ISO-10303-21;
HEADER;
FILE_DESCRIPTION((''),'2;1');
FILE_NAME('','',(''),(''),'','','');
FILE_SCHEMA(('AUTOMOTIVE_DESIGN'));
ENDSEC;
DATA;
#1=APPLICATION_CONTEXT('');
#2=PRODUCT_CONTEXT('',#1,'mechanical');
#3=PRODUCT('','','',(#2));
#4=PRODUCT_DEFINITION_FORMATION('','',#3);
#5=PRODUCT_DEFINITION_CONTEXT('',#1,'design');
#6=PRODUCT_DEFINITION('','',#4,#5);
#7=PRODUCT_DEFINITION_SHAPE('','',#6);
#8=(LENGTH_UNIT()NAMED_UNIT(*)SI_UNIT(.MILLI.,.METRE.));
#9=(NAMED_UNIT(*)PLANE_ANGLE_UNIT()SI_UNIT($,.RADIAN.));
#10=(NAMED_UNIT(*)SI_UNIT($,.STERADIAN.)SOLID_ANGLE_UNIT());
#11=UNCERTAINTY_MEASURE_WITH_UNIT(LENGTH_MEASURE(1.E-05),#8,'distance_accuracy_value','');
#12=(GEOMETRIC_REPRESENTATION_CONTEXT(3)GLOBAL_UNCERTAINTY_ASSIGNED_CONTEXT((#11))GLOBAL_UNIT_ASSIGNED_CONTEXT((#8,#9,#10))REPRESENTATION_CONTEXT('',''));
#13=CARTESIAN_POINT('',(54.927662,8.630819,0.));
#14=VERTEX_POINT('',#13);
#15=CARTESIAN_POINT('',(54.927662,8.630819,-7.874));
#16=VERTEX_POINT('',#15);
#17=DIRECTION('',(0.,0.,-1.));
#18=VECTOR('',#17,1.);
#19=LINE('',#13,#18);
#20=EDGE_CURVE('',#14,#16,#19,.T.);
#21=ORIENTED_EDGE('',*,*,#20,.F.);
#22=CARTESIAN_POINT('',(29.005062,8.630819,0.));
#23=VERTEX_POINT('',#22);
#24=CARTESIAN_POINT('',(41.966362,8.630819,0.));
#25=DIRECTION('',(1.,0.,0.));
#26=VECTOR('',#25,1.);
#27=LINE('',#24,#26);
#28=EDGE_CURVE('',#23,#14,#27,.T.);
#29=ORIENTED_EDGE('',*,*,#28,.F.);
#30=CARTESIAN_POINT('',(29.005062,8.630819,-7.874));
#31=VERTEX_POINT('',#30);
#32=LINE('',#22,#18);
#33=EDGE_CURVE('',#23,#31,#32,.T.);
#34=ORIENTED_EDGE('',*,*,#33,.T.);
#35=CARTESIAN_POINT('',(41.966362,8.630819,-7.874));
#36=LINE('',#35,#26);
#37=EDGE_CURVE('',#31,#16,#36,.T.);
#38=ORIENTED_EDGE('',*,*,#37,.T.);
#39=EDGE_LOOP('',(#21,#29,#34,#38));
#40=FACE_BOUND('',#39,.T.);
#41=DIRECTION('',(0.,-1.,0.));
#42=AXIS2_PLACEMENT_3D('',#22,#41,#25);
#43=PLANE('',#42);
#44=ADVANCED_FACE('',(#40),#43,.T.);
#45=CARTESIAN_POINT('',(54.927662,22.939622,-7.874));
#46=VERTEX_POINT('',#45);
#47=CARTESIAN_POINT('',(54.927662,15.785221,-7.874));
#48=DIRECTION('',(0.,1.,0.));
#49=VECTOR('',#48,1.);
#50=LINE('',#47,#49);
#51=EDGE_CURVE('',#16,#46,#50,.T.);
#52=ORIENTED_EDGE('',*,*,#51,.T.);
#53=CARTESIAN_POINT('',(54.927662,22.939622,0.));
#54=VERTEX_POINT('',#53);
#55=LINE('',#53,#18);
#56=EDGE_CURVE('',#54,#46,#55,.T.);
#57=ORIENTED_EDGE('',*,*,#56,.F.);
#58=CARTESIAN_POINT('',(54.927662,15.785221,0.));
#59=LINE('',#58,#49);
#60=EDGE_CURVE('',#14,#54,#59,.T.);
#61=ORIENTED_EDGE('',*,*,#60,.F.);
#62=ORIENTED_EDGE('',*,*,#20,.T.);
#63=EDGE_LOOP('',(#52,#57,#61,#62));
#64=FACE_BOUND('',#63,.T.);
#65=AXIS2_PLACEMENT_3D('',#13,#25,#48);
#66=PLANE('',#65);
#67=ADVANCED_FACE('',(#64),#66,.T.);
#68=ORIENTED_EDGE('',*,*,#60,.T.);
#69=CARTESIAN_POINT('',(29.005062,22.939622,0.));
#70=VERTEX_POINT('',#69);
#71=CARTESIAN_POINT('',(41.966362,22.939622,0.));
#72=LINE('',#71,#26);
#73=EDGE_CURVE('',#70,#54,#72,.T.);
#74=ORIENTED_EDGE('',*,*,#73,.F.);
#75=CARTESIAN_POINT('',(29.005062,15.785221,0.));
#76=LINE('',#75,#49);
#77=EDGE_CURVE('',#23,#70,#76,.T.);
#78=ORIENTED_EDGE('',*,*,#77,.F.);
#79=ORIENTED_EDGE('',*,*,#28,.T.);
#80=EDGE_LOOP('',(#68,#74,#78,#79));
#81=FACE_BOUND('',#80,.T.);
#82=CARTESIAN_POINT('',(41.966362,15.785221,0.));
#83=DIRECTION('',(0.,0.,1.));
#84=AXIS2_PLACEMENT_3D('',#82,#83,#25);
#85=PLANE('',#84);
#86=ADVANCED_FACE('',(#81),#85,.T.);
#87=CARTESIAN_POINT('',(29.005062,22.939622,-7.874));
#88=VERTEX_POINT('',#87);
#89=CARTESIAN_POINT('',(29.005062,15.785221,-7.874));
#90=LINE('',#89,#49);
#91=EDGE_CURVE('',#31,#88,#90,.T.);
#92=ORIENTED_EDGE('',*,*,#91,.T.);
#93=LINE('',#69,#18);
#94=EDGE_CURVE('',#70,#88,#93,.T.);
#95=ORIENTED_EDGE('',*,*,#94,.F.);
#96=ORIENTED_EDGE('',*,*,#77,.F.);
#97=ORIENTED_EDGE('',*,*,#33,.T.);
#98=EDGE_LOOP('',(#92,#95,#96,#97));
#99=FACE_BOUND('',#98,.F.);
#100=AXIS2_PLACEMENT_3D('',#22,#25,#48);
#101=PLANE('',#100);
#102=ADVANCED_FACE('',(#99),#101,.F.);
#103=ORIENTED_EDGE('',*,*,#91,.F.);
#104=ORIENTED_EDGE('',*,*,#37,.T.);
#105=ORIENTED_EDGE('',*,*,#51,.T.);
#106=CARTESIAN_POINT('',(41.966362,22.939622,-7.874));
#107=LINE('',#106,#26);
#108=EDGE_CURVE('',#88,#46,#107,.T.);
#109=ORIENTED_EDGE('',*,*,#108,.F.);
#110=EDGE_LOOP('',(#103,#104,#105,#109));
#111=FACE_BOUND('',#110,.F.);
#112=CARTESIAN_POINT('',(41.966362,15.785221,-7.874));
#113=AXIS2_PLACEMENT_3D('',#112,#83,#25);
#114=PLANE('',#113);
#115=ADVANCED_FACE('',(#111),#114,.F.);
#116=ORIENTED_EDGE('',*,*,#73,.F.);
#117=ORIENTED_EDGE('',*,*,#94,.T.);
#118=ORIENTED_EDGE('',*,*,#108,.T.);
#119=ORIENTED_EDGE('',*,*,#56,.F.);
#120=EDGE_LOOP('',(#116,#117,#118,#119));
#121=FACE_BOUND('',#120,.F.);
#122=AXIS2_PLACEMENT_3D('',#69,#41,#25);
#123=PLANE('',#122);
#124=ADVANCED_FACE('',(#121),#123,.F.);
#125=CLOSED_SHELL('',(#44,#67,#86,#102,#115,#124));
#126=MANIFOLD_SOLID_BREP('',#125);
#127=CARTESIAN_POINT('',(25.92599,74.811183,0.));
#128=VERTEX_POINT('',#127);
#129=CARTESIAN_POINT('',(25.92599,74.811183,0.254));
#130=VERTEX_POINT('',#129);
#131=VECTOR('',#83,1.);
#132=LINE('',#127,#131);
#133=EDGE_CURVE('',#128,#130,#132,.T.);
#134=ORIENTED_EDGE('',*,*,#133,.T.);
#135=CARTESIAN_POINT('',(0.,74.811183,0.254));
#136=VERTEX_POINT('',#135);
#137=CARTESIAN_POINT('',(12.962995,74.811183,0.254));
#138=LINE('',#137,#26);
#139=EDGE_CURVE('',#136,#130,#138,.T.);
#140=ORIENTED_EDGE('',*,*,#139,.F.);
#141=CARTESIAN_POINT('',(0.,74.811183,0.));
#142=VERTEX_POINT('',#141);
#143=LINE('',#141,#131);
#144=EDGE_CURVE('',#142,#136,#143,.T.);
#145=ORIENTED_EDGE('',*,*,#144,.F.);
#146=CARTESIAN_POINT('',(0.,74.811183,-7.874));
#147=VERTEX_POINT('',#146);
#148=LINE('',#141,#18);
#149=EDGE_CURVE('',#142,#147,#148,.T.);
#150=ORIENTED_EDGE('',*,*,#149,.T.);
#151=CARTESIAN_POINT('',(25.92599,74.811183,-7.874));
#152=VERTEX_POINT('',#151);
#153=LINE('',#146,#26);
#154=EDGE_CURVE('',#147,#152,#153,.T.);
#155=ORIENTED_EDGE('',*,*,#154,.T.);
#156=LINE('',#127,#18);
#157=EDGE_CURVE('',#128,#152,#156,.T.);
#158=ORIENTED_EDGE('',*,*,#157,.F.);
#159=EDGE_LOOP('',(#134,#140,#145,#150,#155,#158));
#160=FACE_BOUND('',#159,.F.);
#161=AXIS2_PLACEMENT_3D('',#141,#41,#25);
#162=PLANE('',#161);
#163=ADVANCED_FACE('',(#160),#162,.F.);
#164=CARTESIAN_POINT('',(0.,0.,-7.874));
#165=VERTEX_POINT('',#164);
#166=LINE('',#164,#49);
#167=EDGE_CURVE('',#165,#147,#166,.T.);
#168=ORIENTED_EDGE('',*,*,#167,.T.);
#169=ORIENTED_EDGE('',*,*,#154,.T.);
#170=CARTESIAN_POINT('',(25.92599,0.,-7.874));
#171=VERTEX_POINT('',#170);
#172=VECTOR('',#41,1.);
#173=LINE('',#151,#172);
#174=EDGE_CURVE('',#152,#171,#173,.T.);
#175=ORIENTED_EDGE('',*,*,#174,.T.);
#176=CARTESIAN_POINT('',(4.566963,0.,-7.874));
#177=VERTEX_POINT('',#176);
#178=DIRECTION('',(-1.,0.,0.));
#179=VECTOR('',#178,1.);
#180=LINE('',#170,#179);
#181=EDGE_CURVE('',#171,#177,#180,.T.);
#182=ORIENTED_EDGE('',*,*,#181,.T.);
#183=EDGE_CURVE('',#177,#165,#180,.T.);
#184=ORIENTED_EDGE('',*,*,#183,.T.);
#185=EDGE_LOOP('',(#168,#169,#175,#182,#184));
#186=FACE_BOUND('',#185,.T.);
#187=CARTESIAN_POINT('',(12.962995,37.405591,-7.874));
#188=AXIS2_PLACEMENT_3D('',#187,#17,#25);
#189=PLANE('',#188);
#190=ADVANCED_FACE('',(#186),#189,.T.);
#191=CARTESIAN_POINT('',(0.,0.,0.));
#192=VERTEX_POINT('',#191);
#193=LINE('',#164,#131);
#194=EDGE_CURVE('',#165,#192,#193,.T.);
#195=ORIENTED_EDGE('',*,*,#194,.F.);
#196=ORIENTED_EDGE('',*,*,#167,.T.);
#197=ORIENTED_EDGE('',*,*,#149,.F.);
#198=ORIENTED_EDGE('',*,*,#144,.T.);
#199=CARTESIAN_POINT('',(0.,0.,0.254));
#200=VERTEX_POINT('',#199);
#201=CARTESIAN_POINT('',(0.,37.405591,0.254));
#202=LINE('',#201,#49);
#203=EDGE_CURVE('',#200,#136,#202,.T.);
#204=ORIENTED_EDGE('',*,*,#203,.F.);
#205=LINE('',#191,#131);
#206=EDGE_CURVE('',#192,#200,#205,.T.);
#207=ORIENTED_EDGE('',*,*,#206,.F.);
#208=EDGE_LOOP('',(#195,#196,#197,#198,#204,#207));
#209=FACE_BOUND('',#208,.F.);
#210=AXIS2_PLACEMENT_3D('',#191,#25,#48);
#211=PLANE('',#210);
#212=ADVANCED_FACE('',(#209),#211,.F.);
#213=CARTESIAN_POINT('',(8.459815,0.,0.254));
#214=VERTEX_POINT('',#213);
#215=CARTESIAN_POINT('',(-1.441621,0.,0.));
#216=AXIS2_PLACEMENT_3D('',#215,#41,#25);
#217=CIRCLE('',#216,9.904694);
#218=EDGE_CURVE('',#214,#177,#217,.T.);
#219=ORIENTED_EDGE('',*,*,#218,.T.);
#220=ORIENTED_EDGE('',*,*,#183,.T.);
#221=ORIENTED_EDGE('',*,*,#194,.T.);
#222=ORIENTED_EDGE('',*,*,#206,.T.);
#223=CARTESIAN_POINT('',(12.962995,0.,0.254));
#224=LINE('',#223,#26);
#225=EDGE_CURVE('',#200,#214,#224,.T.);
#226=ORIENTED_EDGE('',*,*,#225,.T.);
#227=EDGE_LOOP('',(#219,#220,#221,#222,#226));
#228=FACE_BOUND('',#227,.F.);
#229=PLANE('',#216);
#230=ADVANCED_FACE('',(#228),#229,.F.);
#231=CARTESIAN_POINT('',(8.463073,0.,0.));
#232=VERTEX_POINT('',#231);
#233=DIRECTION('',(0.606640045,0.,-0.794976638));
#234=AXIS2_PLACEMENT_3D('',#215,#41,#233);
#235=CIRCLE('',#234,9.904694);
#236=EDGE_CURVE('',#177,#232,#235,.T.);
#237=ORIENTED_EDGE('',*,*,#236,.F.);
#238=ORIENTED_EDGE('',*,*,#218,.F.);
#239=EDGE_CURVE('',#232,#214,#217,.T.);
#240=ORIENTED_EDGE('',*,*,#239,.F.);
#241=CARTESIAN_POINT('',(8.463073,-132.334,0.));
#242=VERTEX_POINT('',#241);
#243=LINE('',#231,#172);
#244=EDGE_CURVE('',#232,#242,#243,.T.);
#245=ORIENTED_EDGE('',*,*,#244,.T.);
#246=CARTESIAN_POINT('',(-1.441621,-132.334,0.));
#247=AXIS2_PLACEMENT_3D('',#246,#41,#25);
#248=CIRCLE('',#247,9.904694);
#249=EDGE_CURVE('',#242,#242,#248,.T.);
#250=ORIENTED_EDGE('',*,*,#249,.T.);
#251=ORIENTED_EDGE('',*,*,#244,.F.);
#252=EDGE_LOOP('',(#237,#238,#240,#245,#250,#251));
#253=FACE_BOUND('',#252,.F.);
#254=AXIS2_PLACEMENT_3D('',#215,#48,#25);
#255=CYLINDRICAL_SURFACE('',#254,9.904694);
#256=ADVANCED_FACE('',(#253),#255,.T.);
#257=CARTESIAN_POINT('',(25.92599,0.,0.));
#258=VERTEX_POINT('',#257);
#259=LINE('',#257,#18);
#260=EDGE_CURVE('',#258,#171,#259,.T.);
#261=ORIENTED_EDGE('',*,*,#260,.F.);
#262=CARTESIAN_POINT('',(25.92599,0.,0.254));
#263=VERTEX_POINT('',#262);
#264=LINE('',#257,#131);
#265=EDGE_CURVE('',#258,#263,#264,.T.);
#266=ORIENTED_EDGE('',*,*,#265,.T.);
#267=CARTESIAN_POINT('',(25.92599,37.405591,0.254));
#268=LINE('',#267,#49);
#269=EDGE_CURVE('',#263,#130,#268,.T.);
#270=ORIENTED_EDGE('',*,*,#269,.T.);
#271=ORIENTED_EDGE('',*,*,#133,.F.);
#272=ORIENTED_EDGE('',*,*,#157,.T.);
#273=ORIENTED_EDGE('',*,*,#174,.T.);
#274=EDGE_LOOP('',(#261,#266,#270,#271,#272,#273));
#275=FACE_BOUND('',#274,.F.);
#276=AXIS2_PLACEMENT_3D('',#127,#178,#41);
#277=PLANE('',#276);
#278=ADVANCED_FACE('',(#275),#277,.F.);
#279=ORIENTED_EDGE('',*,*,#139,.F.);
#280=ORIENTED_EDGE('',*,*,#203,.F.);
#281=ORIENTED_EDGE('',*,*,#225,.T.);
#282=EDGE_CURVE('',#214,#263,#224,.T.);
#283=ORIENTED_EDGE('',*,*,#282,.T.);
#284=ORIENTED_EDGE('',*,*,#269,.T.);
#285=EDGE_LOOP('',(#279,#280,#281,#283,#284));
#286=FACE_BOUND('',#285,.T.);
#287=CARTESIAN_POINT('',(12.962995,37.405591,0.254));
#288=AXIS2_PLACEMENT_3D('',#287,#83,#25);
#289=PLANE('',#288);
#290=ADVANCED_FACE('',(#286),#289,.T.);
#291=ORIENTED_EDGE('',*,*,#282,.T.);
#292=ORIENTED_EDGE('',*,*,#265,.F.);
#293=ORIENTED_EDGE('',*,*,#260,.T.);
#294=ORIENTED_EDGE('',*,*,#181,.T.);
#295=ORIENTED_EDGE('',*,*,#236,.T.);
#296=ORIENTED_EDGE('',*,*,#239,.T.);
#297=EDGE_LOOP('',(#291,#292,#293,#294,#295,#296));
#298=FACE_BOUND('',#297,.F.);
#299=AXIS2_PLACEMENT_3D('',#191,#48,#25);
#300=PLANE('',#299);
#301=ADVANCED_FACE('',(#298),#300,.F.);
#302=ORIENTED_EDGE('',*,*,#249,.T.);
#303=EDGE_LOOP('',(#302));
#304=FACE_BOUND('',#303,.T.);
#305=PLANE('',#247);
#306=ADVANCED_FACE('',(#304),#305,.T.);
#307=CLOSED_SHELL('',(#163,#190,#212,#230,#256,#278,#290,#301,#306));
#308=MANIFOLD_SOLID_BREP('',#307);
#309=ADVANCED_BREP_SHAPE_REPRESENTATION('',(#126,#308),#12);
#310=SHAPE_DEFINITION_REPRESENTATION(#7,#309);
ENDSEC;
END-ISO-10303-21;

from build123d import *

# Parameters (mm, degrees)
F1_R     = 9.9046935717
F2_DEPTH = 132.334
F4_W     = 25.9259901941
F4_H     = 74.8111829162
F5_DEPTH = 0.254
F6_W     = 25.9226001799
F6_H     = 14.3088037148
F7_DEPTH = 7.874


# Not quite as in the source:
# - the program builds the solid bodies; features that only make, move or delete a surface that nothing else refers to are left out


with BuildPart() as f2:
    # F1 (on Front) → F2 (new body)
    with BuildSketch(Plane.XZ):
        with Locations((-1.4416209888, 0)):
            Circle(F1_R)
    extrude(amount=F2_DEPTH)

    # F4 (on Top) → F5 (join)
    with BuildSketch(Plane.XY):
        with Locations((12.962995097, 37.4055914581)):
            Rectangle(F4_W, F4_H)
    extrude(amount=F5_DEPTH)

    # F6 (on Top) + F5_face (on face) + F5_face1 (on face) → F7 (join)
    with BuildSketch(Plane.XY):
        with Locations((41.966361925, 15.7852205448)):
            Rectangle(F6_W, F6_H)
    with BuildSketch(Plane(origin=(12.962995097, 37.4055914581, 0), x_dir=(1, 0, 0), z_dir=(0, 0, -1))):
        Polygon((-12.962995097, 37.4055914581), (-12.962995097, -37.4055914581), (12.962995097, -37.4055914581), (12.962995097, 37.4055914581), (-4.4999225141, 37.4055914581), align=None)
    with BuildSketch(Plane(origin=(12.962995097, 37.4055914581, 0.254), x_dir=(1, 0, 0), z_dir=(0, 0, 1))):
        Polygon((-12.962995097, 37.4055914581), (-12.962995097, -37.4055914581), (-4.5031798895, -37.4055914581), (12.962995097, -37.4055914581), (12.962995097, 37.4055914581), align=None)
    extrude(amount=-F7_DEPTH, dir=(0, 0, 1))


solid = f2.part
